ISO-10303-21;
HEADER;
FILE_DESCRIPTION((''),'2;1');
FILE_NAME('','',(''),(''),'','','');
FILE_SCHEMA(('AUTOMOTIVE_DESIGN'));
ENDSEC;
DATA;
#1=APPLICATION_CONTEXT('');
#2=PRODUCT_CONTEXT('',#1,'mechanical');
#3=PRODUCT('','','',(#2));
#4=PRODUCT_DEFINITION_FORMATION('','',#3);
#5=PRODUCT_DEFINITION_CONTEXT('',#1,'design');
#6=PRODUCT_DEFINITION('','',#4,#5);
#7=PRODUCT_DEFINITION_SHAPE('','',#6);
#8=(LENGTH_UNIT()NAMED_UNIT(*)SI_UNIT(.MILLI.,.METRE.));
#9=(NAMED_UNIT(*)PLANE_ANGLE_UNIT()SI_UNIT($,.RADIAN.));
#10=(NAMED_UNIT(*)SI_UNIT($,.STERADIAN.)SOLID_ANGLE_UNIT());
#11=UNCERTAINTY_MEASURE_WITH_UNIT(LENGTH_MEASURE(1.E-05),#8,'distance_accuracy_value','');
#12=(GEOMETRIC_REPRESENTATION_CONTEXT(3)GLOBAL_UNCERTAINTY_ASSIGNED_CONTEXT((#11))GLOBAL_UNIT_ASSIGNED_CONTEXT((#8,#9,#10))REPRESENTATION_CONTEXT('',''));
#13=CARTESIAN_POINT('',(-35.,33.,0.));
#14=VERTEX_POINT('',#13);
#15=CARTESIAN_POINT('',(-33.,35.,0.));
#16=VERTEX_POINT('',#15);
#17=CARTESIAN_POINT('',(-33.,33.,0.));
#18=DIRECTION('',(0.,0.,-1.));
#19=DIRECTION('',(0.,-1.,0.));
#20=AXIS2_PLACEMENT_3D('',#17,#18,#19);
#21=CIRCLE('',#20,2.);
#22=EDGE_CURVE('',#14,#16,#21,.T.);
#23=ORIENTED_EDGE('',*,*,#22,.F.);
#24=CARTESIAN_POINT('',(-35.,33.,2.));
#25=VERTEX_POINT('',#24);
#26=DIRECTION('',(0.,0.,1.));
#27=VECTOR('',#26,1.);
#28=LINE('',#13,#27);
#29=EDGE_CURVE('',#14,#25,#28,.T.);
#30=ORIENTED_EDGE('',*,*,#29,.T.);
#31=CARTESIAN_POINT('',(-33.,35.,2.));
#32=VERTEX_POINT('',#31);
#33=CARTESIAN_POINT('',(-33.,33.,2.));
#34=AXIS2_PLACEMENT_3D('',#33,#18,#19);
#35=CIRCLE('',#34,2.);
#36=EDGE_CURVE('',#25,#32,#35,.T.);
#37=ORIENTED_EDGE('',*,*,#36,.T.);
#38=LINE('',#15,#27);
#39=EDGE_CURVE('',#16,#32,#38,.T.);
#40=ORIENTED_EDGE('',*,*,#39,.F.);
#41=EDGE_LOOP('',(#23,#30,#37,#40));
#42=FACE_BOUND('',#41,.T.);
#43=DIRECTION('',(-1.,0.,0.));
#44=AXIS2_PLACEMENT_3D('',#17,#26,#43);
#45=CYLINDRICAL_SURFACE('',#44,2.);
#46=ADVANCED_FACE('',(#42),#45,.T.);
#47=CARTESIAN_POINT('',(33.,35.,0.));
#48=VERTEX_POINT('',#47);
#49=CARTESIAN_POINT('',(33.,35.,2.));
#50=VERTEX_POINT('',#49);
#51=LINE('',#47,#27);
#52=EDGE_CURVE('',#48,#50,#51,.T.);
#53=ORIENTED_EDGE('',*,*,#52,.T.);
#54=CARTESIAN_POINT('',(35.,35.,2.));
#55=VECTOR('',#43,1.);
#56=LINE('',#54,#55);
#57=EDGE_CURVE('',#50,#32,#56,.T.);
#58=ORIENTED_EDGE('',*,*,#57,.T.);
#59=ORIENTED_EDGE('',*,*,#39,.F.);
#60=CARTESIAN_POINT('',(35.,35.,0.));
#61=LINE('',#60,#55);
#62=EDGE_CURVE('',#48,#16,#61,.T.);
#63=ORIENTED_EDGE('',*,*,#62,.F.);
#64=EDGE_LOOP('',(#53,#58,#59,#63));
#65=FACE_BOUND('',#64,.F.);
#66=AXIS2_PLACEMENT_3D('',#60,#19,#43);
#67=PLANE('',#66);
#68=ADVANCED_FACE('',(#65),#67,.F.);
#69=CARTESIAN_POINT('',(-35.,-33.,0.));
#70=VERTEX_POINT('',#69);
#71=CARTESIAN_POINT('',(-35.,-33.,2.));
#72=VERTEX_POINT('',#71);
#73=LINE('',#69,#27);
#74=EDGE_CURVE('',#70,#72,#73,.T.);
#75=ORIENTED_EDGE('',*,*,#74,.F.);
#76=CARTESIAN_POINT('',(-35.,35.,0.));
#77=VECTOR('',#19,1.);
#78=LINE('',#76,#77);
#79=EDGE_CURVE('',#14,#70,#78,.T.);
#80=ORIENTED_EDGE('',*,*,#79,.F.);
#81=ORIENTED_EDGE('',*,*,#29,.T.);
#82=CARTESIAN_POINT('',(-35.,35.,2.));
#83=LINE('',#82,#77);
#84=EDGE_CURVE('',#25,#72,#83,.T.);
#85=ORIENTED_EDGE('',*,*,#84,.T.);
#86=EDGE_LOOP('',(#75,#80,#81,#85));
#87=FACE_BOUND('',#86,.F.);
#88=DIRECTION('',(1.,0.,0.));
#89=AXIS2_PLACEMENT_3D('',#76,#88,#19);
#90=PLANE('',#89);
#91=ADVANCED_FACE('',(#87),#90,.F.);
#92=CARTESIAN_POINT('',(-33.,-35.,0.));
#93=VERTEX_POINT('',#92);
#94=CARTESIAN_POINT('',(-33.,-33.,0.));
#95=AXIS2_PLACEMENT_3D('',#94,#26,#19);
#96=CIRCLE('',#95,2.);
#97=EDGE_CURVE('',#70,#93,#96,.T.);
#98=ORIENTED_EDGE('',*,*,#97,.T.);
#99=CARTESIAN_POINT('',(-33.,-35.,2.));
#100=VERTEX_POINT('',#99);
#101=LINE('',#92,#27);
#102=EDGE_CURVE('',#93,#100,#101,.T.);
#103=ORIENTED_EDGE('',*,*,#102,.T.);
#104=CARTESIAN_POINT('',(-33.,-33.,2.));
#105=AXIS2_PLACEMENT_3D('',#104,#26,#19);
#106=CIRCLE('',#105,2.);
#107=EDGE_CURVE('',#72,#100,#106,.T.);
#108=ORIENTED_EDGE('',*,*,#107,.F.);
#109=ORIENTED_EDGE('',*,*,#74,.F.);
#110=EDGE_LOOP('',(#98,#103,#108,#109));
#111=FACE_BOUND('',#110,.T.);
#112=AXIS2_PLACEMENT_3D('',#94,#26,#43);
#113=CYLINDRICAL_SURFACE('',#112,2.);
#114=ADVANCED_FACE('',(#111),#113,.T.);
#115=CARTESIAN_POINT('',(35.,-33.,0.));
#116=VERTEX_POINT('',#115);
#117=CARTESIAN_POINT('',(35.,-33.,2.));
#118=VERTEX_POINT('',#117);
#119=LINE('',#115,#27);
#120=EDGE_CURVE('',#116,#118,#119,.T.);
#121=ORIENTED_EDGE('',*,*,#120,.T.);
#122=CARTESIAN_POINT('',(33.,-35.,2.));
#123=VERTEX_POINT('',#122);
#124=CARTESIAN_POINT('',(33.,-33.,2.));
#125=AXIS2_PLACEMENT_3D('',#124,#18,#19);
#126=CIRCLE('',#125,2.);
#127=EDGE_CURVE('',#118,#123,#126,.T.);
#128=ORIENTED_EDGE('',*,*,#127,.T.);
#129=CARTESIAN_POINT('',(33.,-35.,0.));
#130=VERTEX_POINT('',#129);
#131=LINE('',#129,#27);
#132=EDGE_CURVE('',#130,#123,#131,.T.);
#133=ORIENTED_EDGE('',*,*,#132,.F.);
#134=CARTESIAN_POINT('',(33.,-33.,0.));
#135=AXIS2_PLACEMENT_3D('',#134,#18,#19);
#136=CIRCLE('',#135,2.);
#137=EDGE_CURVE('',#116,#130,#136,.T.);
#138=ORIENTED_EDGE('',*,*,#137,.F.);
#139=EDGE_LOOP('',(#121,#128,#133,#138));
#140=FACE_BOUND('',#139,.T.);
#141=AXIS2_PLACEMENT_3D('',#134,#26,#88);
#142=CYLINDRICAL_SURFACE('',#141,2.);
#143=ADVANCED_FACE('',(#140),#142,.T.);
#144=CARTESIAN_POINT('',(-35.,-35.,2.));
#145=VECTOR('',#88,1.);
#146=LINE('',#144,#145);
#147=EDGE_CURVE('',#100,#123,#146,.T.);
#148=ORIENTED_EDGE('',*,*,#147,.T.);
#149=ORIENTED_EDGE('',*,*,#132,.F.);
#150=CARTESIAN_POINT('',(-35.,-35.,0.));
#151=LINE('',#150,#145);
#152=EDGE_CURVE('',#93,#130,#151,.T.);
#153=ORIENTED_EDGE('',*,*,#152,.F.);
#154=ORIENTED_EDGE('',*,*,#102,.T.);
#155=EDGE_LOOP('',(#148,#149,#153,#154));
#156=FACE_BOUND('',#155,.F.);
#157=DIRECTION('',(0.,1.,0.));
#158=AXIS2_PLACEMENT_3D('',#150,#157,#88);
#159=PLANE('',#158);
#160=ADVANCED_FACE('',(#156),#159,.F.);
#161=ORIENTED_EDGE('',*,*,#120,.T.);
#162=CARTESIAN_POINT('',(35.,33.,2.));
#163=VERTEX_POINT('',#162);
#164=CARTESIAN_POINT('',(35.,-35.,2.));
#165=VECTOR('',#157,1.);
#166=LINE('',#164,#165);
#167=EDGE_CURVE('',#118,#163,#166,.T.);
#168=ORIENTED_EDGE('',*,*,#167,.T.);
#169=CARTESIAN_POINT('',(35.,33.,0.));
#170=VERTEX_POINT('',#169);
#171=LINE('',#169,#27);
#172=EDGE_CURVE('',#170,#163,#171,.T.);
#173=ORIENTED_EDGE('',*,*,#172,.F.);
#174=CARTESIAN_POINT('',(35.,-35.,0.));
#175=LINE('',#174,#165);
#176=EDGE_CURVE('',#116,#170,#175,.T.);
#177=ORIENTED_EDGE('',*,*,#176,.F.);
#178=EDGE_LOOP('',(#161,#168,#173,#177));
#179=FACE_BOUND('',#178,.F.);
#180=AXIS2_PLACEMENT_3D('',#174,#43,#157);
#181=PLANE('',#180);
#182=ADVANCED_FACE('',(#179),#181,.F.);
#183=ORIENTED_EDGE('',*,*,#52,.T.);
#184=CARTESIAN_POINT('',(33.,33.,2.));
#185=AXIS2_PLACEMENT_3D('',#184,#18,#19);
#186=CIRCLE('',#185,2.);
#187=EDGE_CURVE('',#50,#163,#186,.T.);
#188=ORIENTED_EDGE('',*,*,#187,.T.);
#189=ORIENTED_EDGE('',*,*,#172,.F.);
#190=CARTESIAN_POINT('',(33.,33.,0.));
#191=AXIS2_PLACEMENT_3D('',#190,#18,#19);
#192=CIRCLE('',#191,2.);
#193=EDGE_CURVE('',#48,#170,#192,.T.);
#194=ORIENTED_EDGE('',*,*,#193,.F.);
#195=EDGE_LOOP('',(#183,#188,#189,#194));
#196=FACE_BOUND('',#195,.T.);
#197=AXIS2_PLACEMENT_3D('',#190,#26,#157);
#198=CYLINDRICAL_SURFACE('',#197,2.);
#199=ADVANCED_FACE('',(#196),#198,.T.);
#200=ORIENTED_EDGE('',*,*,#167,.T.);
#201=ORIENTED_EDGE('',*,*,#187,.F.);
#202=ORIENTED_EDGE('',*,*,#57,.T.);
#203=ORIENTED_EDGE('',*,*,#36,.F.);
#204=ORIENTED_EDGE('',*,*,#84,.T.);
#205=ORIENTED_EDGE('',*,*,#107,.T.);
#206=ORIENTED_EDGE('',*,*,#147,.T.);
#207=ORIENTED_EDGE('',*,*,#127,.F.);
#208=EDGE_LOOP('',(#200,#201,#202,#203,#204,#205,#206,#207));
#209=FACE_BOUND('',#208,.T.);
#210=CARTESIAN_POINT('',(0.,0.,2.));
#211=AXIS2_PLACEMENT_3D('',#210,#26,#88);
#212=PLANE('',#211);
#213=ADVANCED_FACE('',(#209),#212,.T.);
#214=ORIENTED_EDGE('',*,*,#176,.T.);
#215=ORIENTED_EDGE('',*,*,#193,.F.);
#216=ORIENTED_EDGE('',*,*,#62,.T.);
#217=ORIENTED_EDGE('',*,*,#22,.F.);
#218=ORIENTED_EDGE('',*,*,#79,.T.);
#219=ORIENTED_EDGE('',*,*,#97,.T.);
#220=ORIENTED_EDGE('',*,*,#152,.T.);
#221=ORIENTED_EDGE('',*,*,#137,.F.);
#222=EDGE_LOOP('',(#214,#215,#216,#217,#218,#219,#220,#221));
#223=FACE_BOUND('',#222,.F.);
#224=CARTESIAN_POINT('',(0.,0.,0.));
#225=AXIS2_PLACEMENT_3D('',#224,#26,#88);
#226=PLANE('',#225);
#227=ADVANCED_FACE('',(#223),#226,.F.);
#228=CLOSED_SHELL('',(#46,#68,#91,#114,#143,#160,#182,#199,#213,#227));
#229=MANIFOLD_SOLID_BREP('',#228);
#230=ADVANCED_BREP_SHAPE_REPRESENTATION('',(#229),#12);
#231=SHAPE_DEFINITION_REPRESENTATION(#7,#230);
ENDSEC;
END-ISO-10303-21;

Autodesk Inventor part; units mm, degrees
ref_plane "YZ Plane" through (0, 0, 0) normal (1, 0, 0) x (0, 1, 0)
ref_plane "XZ Plane" through (0, 0, 0) normal (0, 1, 0) x (-1, 0, 0)
ref_plane "XY Plane" through (0, 0, 0) normal (0, 0, 1) x (1, 0, 0)
sketch "Sketch1" plane through (0, 0, 0) normal (0, 0, 1) x (1, 0, 0)
  line L0 (-35, -35) -> (35, -35)
  line L1 (35, -35) -> (35, 35)
  line L2 (35, 35) -> (-35, 35)
  line L3 (-35, 35) -> (-35, -35)
  line L4 (-35, -35) -> (35, 35) construction
  line L5 (35, -35) -> (-35, 35) construction
  point P0 (0, 0)
  dimension "d154" = 70
  dimension "d155" = 70
extrude "Plate5" add sketch "Sketch1" along normal blind 2
fillet "Corner Round1" radius 2 4 edges at (35, 35, 1) (-35, -35, 1) (-35, 35, 1) (35, -35, 1)
sketch "Sketch11" plane through (-50.5, -22, -28) normal (1, 0, 0) x (0, 0, -1)
  line L0 (-25.25, 44) -> (-25.25, 0) construction
  line L1 (0, 0) -> (-25.25, 0) construction
  line L2 (0, 0) -> (0, 44) construction
  line L3 (0, 44) -> (-25.25, 44) construction
  circle A0 centre (-10, 22) radius 5.5
  point P0 (-28, 22)
  point P1 (0, 22)
  dimension "d192" = 11
  dimension "d193" = 10
cut "Cut3" [suppressed]
feature "Corner Round3" [suppressed]
sketch "Sketch10" plane through (-37, 33, 2) normal (1, 0, 0) x (0, 1, 0)
  line L0 (-66, 0) -> (0, 0)
  line L1 (0, 0) -> (0, -30)
  line L2 (0, -30) -> (-66, -30)
  line L3 (-66, -30) -> (-66, 0)
properties part number "PRS 8424 FDS diam way cup_940" material "Stainless Steel"
